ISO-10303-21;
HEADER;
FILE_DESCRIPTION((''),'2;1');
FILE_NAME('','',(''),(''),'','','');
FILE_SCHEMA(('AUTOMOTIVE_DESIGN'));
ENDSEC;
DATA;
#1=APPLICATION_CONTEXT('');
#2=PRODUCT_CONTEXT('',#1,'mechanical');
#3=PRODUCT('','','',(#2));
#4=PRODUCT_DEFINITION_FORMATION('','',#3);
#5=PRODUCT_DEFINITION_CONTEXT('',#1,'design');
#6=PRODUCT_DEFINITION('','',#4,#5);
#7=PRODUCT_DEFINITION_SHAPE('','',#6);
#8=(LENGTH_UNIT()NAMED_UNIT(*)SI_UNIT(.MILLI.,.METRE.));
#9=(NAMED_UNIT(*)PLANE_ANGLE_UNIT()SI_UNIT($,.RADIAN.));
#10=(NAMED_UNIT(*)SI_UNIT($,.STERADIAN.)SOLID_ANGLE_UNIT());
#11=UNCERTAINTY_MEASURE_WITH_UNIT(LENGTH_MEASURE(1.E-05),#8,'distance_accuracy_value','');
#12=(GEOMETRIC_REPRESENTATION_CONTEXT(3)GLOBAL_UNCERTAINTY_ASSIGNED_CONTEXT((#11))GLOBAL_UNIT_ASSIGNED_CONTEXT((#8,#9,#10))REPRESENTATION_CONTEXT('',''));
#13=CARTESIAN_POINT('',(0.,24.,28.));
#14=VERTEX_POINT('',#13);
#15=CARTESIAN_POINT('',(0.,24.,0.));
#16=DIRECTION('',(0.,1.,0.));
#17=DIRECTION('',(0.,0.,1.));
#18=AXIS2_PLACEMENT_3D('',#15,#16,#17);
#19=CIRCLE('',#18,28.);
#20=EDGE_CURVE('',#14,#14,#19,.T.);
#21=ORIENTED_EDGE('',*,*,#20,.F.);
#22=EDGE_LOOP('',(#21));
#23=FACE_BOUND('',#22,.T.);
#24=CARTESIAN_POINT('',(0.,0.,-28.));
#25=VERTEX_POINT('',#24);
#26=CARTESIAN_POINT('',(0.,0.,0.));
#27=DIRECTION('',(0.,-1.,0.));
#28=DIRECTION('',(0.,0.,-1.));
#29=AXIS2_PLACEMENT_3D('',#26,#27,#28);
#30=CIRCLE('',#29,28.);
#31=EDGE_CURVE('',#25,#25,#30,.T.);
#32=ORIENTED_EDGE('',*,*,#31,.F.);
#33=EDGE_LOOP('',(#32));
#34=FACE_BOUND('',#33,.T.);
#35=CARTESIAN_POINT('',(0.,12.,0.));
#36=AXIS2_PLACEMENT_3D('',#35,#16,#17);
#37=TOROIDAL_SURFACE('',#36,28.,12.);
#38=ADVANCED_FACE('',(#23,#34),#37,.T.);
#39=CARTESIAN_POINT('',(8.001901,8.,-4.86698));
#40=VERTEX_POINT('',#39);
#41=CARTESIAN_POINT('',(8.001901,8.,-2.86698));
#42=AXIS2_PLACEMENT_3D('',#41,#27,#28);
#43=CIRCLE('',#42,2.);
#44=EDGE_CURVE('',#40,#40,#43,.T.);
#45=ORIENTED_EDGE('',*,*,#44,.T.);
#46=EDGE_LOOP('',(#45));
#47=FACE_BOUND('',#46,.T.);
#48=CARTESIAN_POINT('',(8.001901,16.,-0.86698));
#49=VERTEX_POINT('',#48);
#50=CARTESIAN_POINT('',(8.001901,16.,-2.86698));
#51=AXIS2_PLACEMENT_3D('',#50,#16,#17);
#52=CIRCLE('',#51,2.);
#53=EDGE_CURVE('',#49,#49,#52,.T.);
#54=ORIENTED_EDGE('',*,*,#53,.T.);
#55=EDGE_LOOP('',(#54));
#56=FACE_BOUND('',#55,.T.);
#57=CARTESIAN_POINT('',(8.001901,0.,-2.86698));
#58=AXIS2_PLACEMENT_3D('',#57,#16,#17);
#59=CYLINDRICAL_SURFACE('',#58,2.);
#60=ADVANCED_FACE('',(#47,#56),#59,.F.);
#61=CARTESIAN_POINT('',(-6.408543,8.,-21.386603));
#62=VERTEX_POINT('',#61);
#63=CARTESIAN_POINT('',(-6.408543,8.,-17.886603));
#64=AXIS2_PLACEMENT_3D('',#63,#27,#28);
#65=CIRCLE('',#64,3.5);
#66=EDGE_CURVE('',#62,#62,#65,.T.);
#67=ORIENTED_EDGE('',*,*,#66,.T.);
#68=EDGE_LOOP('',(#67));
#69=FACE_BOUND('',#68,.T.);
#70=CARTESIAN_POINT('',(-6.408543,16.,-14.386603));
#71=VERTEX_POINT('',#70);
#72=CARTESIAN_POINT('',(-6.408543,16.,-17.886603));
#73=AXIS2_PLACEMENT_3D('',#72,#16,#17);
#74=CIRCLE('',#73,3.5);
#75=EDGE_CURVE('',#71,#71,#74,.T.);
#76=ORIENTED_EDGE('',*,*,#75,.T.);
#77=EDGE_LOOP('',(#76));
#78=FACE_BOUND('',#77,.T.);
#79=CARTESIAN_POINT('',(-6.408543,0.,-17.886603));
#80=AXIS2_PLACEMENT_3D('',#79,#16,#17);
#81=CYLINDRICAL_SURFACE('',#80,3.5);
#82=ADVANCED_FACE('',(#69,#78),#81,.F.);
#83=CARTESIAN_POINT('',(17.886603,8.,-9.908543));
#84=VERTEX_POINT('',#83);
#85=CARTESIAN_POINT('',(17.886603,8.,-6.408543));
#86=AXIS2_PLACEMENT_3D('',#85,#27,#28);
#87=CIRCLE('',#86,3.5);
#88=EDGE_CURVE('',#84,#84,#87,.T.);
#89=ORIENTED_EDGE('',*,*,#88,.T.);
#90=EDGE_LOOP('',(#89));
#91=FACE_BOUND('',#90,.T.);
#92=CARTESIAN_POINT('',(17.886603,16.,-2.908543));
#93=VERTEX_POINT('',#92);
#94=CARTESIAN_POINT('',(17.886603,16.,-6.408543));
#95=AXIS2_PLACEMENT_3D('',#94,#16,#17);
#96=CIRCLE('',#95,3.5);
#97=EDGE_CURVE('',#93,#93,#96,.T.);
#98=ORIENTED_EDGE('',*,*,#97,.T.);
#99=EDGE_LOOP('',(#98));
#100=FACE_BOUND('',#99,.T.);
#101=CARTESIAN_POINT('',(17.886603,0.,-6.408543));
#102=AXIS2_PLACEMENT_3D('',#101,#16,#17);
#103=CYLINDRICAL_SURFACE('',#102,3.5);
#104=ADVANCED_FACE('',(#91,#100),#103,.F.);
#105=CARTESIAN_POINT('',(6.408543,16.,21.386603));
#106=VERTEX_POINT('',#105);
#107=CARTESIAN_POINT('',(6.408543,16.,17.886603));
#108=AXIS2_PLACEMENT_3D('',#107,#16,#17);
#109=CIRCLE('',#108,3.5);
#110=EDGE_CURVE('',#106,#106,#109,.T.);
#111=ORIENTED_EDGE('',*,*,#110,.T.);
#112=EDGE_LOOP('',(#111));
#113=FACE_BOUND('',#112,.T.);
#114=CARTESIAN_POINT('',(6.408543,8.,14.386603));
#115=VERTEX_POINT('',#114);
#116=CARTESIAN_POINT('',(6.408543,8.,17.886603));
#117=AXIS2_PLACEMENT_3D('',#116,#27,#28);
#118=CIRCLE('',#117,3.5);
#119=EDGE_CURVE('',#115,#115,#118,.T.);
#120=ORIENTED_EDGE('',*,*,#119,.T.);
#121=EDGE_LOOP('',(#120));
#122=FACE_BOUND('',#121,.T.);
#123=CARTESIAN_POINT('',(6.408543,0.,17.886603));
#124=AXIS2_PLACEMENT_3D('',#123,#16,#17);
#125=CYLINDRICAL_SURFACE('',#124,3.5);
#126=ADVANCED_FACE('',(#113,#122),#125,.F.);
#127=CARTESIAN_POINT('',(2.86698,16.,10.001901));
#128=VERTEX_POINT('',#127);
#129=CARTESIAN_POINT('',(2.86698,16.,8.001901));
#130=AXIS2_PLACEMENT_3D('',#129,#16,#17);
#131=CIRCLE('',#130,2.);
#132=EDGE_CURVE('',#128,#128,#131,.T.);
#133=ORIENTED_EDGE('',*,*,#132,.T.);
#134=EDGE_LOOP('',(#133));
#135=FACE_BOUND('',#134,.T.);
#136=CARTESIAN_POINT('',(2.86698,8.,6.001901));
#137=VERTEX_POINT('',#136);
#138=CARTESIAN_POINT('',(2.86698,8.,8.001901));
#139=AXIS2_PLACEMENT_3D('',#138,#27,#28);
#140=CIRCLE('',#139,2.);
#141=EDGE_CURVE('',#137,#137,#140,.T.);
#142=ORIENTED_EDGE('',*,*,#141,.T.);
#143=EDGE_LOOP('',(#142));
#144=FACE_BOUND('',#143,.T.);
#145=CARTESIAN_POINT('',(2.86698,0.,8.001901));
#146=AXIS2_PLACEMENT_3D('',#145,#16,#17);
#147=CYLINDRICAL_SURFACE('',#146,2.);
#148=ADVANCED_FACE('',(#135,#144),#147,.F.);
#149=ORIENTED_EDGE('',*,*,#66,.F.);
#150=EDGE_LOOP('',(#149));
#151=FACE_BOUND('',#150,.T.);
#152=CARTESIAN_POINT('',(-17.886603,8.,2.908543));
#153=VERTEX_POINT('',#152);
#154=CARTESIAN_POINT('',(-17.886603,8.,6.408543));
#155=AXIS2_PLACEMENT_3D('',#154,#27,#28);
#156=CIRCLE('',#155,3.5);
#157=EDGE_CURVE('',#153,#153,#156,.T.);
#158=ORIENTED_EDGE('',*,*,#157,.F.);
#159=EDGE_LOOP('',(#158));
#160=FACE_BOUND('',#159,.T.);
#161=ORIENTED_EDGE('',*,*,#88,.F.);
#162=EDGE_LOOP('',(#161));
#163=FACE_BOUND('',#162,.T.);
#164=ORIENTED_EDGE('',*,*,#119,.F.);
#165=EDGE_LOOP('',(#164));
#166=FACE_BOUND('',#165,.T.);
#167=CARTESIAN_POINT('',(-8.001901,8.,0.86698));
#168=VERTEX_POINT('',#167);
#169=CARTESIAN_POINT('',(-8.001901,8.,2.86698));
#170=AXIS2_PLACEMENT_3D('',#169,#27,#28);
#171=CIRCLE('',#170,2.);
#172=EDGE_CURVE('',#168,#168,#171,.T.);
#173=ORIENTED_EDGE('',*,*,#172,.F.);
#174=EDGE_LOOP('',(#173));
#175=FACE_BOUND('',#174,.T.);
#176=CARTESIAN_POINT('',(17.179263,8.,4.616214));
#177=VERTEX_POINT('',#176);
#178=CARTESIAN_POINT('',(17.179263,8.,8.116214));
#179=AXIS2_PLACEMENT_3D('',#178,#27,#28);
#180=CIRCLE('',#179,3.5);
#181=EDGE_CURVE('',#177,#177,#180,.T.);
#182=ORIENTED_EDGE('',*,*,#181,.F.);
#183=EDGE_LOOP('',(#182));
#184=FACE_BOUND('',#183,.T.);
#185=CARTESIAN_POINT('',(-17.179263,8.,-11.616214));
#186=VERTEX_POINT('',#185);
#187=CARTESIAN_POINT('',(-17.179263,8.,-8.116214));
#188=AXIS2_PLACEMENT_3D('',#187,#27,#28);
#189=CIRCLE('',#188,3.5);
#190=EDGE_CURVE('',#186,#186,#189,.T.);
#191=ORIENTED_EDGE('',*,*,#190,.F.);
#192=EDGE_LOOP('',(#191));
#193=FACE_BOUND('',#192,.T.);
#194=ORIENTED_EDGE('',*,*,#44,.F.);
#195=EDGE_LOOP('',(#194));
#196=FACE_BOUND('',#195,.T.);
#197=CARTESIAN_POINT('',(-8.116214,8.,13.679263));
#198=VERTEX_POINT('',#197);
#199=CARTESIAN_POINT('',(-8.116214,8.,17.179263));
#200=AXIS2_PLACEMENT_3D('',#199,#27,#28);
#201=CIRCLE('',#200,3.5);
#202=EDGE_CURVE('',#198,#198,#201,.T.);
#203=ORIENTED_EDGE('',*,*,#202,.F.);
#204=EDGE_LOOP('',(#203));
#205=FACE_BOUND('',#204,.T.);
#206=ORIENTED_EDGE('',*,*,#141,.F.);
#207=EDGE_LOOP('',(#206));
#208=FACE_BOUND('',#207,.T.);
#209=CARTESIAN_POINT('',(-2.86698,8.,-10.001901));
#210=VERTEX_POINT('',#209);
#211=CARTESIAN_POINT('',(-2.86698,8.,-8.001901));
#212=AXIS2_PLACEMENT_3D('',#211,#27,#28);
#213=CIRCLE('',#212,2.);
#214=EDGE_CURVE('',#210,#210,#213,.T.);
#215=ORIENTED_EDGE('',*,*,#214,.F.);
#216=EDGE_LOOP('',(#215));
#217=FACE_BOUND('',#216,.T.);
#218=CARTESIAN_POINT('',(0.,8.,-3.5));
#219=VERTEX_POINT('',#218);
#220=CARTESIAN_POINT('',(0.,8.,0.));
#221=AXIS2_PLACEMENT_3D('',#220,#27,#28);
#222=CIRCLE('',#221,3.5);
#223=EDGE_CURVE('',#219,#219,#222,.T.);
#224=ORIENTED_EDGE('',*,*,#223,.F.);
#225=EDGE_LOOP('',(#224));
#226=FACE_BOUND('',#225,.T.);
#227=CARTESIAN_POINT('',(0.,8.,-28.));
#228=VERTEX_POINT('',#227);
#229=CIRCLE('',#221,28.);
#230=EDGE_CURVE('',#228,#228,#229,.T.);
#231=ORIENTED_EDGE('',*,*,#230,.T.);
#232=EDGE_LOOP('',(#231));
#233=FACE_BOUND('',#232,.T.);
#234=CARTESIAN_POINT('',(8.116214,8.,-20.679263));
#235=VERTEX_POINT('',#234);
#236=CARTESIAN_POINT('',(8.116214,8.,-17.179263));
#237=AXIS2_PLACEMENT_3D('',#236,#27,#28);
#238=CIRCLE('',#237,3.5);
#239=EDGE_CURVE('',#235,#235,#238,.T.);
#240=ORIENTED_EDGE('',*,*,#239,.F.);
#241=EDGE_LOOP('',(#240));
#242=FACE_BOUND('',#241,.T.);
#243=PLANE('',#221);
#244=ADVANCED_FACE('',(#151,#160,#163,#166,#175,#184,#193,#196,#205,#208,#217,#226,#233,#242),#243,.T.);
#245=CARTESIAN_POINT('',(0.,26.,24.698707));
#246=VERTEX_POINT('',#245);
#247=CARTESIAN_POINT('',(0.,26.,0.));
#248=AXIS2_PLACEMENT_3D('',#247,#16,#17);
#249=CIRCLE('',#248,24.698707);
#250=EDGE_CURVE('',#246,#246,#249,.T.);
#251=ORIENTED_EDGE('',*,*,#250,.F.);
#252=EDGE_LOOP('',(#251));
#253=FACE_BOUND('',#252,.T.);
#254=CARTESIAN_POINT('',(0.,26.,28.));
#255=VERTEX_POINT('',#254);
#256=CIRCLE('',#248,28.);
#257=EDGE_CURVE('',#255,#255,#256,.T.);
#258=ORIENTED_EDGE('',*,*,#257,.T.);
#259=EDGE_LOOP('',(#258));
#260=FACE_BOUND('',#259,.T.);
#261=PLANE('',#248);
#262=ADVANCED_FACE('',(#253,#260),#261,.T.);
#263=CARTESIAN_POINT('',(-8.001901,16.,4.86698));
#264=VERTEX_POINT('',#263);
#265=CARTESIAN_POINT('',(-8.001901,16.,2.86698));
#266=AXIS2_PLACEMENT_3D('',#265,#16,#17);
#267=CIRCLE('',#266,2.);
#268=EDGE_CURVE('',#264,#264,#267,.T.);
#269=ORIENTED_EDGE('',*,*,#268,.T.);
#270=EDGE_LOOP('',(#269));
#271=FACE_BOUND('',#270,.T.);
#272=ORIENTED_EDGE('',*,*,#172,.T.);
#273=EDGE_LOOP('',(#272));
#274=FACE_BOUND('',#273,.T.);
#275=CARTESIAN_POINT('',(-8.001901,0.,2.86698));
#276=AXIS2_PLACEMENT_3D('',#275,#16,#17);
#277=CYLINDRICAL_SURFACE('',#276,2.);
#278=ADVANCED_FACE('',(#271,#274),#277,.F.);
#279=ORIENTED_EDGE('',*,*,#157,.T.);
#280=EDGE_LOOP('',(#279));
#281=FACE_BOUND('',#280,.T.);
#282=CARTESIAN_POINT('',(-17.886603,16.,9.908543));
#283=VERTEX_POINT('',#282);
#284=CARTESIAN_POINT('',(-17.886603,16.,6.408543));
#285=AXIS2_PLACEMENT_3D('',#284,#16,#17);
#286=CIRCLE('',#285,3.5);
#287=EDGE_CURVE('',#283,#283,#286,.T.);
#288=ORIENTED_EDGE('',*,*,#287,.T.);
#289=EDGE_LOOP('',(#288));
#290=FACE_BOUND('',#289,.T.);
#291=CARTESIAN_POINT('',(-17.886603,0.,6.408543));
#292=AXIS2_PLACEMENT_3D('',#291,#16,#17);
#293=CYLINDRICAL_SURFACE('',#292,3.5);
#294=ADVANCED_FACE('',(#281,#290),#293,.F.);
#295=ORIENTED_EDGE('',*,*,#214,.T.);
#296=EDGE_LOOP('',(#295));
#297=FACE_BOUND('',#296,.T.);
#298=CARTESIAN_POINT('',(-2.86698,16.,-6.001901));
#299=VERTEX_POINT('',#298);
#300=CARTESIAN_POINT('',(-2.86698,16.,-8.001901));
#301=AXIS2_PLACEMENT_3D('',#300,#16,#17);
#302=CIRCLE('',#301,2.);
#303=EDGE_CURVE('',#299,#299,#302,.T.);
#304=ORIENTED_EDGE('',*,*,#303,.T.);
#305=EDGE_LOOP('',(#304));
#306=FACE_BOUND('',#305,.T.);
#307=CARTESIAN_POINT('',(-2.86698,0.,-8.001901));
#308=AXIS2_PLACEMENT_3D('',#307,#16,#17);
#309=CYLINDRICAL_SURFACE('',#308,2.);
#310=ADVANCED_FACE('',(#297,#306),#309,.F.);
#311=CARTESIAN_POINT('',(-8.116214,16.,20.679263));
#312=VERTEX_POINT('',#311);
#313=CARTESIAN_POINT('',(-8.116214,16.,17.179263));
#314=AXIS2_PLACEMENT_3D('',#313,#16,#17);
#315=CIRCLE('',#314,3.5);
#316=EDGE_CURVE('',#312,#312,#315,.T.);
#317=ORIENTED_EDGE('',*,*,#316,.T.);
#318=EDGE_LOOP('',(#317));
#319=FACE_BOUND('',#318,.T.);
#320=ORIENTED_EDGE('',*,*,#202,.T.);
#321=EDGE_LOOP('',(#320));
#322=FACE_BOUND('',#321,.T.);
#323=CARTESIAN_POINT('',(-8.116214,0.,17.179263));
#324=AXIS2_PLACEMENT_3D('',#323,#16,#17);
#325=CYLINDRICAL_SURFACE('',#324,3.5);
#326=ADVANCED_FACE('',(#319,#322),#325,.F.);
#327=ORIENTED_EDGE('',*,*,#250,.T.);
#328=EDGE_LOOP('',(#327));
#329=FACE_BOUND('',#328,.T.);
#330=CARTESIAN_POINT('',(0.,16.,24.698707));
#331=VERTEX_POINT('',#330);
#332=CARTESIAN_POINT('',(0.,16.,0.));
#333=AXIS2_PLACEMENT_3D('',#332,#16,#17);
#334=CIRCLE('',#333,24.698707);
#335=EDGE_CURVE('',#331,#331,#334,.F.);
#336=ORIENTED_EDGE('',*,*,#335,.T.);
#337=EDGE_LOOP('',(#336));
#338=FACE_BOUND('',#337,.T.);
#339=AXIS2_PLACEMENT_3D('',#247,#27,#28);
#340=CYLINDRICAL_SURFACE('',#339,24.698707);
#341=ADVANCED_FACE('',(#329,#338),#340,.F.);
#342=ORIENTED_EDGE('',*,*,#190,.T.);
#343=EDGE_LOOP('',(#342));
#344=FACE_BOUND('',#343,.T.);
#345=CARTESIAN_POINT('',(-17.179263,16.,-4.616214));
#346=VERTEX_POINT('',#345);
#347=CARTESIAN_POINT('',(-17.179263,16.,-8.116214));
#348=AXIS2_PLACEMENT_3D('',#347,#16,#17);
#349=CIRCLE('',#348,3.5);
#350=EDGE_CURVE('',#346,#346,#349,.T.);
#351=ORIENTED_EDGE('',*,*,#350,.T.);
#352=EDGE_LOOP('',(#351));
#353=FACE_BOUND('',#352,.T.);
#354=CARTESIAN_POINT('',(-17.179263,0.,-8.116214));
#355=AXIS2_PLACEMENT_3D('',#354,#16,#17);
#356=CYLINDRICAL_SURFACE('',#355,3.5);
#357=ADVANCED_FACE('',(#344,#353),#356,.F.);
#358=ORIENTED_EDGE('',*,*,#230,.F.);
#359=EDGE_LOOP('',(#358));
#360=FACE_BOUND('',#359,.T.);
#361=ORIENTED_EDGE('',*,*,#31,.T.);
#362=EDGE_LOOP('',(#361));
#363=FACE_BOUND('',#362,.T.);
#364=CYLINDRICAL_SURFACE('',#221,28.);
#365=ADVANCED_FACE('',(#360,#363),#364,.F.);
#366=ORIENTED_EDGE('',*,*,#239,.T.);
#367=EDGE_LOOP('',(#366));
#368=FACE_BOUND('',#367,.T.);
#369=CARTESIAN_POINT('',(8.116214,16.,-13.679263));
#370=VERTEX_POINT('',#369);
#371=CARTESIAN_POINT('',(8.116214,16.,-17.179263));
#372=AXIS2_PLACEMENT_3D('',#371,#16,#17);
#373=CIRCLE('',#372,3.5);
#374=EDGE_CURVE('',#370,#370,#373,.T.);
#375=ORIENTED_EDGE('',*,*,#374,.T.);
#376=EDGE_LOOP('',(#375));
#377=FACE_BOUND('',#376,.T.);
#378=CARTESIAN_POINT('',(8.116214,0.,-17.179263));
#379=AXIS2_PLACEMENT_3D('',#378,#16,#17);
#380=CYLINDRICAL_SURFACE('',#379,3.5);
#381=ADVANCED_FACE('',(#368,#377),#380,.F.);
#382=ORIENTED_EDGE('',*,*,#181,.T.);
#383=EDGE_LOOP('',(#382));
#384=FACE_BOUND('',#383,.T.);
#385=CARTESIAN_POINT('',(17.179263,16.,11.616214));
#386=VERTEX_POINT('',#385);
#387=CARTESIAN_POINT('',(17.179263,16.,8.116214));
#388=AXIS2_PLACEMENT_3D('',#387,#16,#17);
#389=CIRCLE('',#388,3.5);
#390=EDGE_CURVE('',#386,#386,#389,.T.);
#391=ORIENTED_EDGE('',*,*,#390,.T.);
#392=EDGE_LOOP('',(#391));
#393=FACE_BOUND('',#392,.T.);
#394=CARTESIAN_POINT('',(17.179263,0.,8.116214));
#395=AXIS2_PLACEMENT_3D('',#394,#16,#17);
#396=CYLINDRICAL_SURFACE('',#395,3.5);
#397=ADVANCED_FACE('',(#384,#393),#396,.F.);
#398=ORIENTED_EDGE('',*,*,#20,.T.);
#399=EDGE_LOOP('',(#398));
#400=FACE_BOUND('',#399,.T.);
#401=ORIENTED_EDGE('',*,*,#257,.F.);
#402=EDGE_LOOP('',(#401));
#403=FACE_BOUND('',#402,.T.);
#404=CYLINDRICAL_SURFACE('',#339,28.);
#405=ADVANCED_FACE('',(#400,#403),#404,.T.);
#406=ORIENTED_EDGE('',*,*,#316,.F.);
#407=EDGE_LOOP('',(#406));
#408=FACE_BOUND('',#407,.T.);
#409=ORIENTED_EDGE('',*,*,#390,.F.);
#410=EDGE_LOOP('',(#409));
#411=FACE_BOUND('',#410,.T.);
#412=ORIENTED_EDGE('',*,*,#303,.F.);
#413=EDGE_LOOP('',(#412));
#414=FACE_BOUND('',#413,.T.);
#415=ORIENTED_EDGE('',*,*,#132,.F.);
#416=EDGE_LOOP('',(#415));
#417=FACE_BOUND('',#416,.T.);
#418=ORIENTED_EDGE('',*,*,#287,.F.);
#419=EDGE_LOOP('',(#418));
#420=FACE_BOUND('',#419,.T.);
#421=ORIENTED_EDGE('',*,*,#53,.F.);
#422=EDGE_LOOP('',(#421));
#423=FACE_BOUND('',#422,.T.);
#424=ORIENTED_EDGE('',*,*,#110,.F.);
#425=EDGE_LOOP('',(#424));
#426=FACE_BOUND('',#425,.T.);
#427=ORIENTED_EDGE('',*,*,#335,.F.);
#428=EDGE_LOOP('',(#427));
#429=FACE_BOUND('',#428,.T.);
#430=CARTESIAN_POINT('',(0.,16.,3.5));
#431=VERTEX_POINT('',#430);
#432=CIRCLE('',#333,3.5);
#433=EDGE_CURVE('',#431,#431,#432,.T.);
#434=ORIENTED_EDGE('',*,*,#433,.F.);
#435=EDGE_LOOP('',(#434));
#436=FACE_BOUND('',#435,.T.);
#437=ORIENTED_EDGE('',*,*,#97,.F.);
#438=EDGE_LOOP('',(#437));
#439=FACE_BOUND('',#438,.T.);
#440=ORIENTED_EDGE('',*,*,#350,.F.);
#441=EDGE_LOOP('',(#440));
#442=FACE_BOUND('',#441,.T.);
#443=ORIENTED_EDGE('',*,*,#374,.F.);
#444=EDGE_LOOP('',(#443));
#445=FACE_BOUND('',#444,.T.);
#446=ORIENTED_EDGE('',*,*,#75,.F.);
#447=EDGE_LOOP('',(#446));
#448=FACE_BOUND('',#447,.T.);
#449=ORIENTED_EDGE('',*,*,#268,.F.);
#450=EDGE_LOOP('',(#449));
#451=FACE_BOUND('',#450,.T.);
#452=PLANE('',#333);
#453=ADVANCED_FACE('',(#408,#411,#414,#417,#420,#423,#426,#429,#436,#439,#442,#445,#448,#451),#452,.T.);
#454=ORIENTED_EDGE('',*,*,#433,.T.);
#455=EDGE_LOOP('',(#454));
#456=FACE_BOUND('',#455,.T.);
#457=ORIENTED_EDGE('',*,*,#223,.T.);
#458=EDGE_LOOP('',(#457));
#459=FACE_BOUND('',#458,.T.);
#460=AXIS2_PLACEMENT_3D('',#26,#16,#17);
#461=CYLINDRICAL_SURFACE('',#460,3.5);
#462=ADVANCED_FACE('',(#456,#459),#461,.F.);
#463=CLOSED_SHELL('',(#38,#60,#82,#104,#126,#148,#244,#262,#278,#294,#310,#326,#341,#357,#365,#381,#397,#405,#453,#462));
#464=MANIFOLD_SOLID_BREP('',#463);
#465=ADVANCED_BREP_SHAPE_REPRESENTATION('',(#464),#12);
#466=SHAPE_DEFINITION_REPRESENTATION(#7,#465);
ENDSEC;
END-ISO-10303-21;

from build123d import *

# Parameters (mm, degrees)
ESQUISSE1_R             = 40
BOSS_EXTRU_1_DEPTH      = 24
CONG_2_R                = 12
ESQUISSE2_R             = 28
ENL_V_MAT_EXTRU_1_DEPTH = 8
ENL_V_START             = -8
ESQUISSE3_R             = 28
ENL_V_MAT_EXTRU_2_DEPTH = 8
ESQUISSE4_R             = 3.5
ESQUISSE4_R_2           = 2
ENL_V_MAT_EXTRU_3_DEPTH = 59.787753895
BOSS_EXTRU_2_START      = 10
ESQUISSE5_R             = 28
ESQUISSE5_R_2           = 24.698706658
BOSS_EXTRU_2_DEPTH      = 10


with BuildPart() as part:
    # Esquisse1 → Boss.-Extru.1 (new body)
    with BuildSketch(Plane(origin=(0, 0, 0), x_dir=(1, 0, 0), z_dir=(0, 1, 0))):
        with Locations(Location((0, 0, 0), (0, 0, 270))):
            Circle(ESQUISSE1_R)
    extrude(amount=BOSS_EXTRU_1_DEPTH)

    # Congé2
    cong_2_edges = [part.edges().sort_by_distance(p)[0] for p in [
        (0, 0, -40),
        (0, 24, -40),
    ]]
    fillet(cong_2_edges, radius=CONG_2_R - 0.0001)  # a hair under: the kernel refuses the full size

    # Esquisse2 → Enlèv. mat.-Extru.1 (cut)
    with BuildSketch(Plane(origin=(0, 24, 0), x_dir=(1, 0, 0), z_dir=(0, 1, 0))):
        with Locations(Location((0, 0, 0), (0, 0, 270))):
            Circle(ESQUISSE2_R)
    extrude(amount=-ENL_V_MAT_EXTRU_1_DEPTH, mode=Mode.SUBTRACT)

    # Esquisse3 → Enlèv. mat.-Extru.2 (cut)
    with BuildSketch(Plane.XZ.offset(ENL_V_START)):
        with Locations(Location((0, 0, 0), (0, 0, 90))):
            Circle(ESQUISSE3_R)
    extrude(amount=ENL_V_MAT_EXTRU_2_DEPTH, mode=Mode.SUBTRACT)

    # Esquisse4 → Enlèv. mat.-Extru.3 (cut, through all)
    with BuildSketch(Plane(origin=(0, 16, 0), x_dir=(1, 0, 0), z_dir=(0, 1, 0))):
        with Locations(Location((0, 0, 0), (0, 0, 270))):
            Circle(ESQUISSE4_R)
        with Locations(Location((-2.866979911, 8.001901411, 0), (0, 0, 270))):
            Circle(ESQUISSE4_R_2)
        with Locations(Location((8.001901411, 2.866979911, 0), (0, 0, 270))):
            Circle(ESQUISSE4_R_2)
        with Locations(Location((2.866979911, -8.001901411, 0), (0, 0, 270))):
            Circle(ESQUISSE4_R_2)
        with Locations(Location((-8.001901411, -2.866979911, 0), (0, 0, 270))):
            Circle(ESQUISSE4_R_2)
        with Locations(Location((-6.408543331, 17.886603154, 0), (0, 0, 270))):
            Circle(ESQUISSE4_R)
        with Locations(Location((8.116213936, 17.179262829, 0), (0, 0, 270))):
            Circle(ESQUISSE4_R)
        with Locations(Location((17.886603154, 6.408543331, 0), (0, 0, 270))):
            Circle(ESQUISSE4_R)
        with Locations(Location((17.179262829, -8.116213936, 0), (0, 0, 270))):
            Circle(ESQUISSE4_R)
        with Locations(Location((6.408543331, -17.886603154, 0), (0, 0, 270))):
            Circle(ESQUISSE4_R)
        with Locations(Location((-8.116213936, -17.179262829, 0), (0, 0, 270))):
            Circle(ESQUISSE4_R)
        with Locations(Location((-17.886603154, -6.408543331, 0), (0, 0, 270))):
            Circle(ESQUISSE4_R)
        with Locations(Location((-17.179262829, 8.116213936, 0), (0, 0, 270))):
            Circle(ESQUISSE4_R)
    extrude(amount=-ENL_V_MAT_EXTRU_3_DEPTH, mode=Mode.SUBTRACT)

    # Esquisse5 → Boss.-Extru.2 (add)
    with BuildSketch(Plane(origin=(0, 16, 0), x_dir=(1, 0, 0), z_dir=(0, 1, 0)).offset(BOSS_EXTRU_2_START)):
        with Locations(Location((0, 0, 0), (0, 0, 90))):
            Circle(ESQUISSE5_R)
        with Locations(Location((0, 0, 0), (0, 0, 270))):
            Circle(ESQUISSE5_R_2, mode=Mode.SUBTRACT)
    extrude(amount=-BOSS_EXTRU_2_DEPTH)


solid = part.part
